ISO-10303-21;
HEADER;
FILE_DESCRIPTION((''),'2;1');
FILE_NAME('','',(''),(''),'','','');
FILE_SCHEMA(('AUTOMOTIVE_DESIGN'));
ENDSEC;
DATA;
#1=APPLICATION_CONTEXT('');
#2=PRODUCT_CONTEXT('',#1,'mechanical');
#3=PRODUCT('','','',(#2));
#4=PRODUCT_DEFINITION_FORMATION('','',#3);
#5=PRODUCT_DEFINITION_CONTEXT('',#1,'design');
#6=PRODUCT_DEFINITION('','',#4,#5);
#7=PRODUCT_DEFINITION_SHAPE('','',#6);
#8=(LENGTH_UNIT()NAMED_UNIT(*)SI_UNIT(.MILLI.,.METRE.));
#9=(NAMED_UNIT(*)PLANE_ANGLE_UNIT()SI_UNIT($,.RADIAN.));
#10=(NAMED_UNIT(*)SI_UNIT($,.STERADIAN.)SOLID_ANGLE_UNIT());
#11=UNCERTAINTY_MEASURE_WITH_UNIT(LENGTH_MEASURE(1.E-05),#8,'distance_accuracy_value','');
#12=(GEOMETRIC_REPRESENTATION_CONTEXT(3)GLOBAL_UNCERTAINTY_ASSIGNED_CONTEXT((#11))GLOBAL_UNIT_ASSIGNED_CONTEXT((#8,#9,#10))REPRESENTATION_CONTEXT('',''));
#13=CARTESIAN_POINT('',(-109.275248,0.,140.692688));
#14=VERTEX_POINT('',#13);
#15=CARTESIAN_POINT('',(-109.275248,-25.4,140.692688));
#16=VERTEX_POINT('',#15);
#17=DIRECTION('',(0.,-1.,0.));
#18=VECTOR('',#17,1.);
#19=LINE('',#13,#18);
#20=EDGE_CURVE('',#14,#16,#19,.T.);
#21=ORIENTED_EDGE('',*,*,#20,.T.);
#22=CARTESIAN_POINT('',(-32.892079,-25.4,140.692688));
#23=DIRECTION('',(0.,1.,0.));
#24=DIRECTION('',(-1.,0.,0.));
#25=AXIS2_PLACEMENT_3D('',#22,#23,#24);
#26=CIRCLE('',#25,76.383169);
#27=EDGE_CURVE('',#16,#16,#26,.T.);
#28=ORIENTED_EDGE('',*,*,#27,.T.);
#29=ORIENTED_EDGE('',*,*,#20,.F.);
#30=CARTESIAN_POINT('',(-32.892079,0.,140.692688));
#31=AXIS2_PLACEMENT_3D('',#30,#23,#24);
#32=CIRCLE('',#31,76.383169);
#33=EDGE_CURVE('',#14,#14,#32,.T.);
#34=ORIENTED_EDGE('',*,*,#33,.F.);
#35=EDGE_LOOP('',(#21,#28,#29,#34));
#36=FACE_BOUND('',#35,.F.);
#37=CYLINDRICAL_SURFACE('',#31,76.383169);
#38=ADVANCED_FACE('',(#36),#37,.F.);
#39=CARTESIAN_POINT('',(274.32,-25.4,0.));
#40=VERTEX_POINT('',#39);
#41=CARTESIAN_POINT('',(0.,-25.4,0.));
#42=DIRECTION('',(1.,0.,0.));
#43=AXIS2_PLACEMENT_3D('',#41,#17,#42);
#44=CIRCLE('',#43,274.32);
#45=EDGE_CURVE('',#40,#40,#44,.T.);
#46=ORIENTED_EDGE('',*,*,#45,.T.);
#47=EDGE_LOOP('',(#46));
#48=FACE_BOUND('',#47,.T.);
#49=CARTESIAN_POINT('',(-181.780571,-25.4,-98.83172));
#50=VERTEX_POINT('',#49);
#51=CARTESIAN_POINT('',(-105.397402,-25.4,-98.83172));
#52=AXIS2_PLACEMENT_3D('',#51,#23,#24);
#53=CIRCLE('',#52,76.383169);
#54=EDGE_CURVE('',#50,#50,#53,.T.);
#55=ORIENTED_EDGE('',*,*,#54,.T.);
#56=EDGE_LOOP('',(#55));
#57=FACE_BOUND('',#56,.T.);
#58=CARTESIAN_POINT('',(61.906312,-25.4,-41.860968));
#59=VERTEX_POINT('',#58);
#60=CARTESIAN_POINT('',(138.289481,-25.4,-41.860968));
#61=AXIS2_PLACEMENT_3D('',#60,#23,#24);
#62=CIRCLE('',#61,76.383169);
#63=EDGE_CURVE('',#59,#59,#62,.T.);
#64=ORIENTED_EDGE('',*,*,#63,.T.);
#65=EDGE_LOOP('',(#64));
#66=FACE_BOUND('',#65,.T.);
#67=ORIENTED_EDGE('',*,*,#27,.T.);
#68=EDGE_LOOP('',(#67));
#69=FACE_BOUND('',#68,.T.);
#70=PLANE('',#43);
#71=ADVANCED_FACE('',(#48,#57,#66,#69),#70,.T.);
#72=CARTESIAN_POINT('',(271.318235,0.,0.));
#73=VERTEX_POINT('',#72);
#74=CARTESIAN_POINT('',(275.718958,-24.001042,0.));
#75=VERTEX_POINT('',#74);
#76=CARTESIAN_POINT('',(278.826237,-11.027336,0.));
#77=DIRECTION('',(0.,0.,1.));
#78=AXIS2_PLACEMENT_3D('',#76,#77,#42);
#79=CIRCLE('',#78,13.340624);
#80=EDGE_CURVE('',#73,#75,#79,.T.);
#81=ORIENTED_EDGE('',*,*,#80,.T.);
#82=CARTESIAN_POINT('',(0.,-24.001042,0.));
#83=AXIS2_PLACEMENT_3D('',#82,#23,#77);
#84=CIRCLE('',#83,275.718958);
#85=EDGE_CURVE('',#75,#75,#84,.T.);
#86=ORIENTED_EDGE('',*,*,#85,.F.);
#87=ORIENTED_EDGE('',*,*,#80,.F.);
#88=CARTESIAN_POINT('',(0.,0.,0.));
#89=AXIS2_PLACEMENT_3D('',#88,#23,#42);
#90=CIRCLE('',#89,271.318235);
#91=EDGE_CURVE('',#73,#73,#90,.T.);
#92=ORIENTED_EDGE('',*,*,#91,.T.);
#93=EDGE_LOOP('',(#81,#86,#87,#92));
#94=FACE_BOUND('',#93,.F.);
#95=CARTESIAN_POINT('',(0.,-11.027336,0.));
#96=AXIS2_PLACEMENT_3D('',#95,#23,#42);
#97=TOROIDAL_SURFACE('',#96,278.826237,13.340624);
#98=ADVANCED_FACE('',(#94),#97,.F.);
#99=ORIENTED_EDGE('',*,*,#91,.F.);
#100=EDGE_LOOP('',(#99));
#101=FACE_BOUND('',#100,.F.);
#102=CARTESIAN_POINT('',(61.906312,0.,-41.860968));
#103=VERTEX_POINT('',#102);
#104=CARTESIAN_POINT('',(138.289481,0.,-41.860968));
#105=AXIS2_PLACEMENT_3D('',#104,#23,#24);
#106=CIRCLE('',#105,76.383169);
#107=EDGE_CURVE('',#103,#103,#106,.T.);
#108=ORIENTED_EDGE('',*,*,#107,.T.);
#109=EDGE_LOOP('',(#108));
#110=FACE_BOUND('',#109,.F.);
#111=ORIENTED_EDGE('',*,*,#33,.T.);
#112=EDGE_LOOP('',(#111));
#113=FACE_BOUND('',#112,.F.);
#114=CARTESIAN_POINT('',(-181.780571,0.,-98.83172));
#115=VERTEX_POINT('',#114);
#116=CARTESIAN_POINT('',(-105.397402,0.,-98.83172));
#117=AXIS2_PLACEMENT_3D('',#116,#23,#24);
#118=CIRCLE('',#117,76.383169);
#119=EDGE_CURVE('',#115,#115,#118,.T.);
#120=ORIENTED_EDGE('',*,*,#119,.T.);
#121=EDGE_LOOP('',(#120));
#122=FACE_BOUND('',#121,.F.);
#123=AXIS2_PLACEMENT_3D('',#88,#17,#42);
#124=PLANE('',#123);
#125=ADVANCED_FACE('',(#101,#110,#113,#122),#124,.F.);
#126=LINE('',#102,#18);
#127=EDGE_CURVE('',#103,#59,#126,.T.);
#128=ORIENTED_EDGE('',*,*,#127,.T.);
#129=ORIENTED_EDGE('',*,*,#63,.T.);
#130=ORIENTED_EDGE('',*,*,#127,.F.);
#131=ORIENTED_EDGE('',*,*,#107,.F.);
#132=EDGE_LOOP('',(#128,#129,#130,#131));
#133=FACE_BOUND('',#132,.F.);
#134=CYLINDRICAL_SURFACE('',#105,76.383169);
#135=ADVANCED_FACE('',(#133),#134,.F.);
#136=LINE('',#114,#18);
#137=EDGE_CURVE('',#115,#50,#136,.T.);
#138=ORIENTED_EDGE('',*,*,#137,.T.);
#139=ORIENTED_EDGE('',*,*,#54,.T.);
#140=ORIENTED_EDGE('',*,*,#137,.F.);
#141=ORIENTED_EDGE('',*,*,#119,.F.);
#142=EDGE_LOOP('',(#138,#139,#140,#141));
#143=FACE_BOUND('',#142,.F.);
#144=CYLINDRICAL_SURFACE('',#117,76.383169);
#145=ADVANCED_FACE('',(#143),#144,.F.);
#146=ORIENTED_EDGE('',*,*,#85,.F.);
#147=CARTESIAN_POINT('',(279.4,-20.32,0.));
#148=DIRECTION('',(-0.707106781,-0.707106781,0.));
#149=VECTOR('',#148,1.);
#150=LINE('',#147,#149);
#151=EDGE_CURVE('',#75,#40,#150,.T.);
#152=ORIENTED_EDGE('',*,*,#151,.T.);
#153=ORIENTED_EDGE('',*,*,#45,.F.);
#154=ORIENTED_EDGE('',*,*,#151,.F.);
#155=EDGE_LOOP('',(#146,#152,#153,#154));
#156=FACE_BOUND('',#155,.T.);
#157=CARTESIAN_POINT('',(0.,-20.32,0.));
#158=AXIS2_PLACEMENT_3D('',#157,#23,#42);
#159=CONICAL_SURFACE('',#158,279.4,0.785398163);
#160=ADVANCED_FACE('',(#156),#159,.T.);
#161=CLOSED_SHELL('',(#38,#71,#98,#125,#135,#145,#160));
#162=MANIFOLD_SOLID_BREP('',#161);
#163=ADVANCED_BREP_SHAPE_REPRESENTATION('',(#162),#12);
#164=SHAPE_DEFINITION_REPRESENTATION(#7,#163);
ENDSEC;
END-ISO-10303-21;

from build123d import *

# Parameters (mm, degrees)
F0_R     = 279.4
F1_DEPTH = 25.4
F2_R     = 13.3406236018
F6_R     = 76.3831689613
F7_DEPTH = 25.4


# Not quite as in the source:
# - a fillet or chamfer that OpenCascade refuses, or shapes differently, is made with other operations: its cross-section is extruded or revolved along the edge and cut away or added


with BuildPart() as f1:
    # F0 (on Front) → F1 (new body)
    with BuildSketch(Plane.XZ):
        Circle(F0_R)
    extrude(amount=F1_DEPTH)

    # F2 (on Top) → F3 (revolve, cut)
    with BuildSketch(Plane.XY):
        with Locations((278.8262367249, -11.0273361206)):
            Circle(F2_R)
    revolve(axis=Axis((0, 0, 0), (0, 1, 0)), mode=Mode.SUBTRACT)

    # F4: chamfer of 5.08 on 1 edges, made by hand

    # F4_s1 → F4_t2 (revolve, cut)
    with BuildSketch(Plane.XY):
        Polygon((279.4, -20.32), (274.32, -25.4), (279.4, -25.4), align=None)
    revolve(axis=Axis((0, -25.4, 0), (0, -1, 0)), mode=Mode.SUBTRACT)

    # F6 (on face) → F7 (cut)
    with BuildSketch(Plane(origin=(0, 0, 0), x_dir=(-1, 0, 0), z_dir=(0, 1, 0))):
        with Locations((-138.2894814014, -41.8609678745)):
            Circle(F6_R)
        with Locations((32.8920790944, 140.6926879071)):
            Circle(F6_R)
        with Locations((105.3974023071, -98.8317200326)):
            Circle(F6_R)
    extrude(amount=-F7_DEPTH, mode=Mode.SUBTRACT)


solid = f1.part
